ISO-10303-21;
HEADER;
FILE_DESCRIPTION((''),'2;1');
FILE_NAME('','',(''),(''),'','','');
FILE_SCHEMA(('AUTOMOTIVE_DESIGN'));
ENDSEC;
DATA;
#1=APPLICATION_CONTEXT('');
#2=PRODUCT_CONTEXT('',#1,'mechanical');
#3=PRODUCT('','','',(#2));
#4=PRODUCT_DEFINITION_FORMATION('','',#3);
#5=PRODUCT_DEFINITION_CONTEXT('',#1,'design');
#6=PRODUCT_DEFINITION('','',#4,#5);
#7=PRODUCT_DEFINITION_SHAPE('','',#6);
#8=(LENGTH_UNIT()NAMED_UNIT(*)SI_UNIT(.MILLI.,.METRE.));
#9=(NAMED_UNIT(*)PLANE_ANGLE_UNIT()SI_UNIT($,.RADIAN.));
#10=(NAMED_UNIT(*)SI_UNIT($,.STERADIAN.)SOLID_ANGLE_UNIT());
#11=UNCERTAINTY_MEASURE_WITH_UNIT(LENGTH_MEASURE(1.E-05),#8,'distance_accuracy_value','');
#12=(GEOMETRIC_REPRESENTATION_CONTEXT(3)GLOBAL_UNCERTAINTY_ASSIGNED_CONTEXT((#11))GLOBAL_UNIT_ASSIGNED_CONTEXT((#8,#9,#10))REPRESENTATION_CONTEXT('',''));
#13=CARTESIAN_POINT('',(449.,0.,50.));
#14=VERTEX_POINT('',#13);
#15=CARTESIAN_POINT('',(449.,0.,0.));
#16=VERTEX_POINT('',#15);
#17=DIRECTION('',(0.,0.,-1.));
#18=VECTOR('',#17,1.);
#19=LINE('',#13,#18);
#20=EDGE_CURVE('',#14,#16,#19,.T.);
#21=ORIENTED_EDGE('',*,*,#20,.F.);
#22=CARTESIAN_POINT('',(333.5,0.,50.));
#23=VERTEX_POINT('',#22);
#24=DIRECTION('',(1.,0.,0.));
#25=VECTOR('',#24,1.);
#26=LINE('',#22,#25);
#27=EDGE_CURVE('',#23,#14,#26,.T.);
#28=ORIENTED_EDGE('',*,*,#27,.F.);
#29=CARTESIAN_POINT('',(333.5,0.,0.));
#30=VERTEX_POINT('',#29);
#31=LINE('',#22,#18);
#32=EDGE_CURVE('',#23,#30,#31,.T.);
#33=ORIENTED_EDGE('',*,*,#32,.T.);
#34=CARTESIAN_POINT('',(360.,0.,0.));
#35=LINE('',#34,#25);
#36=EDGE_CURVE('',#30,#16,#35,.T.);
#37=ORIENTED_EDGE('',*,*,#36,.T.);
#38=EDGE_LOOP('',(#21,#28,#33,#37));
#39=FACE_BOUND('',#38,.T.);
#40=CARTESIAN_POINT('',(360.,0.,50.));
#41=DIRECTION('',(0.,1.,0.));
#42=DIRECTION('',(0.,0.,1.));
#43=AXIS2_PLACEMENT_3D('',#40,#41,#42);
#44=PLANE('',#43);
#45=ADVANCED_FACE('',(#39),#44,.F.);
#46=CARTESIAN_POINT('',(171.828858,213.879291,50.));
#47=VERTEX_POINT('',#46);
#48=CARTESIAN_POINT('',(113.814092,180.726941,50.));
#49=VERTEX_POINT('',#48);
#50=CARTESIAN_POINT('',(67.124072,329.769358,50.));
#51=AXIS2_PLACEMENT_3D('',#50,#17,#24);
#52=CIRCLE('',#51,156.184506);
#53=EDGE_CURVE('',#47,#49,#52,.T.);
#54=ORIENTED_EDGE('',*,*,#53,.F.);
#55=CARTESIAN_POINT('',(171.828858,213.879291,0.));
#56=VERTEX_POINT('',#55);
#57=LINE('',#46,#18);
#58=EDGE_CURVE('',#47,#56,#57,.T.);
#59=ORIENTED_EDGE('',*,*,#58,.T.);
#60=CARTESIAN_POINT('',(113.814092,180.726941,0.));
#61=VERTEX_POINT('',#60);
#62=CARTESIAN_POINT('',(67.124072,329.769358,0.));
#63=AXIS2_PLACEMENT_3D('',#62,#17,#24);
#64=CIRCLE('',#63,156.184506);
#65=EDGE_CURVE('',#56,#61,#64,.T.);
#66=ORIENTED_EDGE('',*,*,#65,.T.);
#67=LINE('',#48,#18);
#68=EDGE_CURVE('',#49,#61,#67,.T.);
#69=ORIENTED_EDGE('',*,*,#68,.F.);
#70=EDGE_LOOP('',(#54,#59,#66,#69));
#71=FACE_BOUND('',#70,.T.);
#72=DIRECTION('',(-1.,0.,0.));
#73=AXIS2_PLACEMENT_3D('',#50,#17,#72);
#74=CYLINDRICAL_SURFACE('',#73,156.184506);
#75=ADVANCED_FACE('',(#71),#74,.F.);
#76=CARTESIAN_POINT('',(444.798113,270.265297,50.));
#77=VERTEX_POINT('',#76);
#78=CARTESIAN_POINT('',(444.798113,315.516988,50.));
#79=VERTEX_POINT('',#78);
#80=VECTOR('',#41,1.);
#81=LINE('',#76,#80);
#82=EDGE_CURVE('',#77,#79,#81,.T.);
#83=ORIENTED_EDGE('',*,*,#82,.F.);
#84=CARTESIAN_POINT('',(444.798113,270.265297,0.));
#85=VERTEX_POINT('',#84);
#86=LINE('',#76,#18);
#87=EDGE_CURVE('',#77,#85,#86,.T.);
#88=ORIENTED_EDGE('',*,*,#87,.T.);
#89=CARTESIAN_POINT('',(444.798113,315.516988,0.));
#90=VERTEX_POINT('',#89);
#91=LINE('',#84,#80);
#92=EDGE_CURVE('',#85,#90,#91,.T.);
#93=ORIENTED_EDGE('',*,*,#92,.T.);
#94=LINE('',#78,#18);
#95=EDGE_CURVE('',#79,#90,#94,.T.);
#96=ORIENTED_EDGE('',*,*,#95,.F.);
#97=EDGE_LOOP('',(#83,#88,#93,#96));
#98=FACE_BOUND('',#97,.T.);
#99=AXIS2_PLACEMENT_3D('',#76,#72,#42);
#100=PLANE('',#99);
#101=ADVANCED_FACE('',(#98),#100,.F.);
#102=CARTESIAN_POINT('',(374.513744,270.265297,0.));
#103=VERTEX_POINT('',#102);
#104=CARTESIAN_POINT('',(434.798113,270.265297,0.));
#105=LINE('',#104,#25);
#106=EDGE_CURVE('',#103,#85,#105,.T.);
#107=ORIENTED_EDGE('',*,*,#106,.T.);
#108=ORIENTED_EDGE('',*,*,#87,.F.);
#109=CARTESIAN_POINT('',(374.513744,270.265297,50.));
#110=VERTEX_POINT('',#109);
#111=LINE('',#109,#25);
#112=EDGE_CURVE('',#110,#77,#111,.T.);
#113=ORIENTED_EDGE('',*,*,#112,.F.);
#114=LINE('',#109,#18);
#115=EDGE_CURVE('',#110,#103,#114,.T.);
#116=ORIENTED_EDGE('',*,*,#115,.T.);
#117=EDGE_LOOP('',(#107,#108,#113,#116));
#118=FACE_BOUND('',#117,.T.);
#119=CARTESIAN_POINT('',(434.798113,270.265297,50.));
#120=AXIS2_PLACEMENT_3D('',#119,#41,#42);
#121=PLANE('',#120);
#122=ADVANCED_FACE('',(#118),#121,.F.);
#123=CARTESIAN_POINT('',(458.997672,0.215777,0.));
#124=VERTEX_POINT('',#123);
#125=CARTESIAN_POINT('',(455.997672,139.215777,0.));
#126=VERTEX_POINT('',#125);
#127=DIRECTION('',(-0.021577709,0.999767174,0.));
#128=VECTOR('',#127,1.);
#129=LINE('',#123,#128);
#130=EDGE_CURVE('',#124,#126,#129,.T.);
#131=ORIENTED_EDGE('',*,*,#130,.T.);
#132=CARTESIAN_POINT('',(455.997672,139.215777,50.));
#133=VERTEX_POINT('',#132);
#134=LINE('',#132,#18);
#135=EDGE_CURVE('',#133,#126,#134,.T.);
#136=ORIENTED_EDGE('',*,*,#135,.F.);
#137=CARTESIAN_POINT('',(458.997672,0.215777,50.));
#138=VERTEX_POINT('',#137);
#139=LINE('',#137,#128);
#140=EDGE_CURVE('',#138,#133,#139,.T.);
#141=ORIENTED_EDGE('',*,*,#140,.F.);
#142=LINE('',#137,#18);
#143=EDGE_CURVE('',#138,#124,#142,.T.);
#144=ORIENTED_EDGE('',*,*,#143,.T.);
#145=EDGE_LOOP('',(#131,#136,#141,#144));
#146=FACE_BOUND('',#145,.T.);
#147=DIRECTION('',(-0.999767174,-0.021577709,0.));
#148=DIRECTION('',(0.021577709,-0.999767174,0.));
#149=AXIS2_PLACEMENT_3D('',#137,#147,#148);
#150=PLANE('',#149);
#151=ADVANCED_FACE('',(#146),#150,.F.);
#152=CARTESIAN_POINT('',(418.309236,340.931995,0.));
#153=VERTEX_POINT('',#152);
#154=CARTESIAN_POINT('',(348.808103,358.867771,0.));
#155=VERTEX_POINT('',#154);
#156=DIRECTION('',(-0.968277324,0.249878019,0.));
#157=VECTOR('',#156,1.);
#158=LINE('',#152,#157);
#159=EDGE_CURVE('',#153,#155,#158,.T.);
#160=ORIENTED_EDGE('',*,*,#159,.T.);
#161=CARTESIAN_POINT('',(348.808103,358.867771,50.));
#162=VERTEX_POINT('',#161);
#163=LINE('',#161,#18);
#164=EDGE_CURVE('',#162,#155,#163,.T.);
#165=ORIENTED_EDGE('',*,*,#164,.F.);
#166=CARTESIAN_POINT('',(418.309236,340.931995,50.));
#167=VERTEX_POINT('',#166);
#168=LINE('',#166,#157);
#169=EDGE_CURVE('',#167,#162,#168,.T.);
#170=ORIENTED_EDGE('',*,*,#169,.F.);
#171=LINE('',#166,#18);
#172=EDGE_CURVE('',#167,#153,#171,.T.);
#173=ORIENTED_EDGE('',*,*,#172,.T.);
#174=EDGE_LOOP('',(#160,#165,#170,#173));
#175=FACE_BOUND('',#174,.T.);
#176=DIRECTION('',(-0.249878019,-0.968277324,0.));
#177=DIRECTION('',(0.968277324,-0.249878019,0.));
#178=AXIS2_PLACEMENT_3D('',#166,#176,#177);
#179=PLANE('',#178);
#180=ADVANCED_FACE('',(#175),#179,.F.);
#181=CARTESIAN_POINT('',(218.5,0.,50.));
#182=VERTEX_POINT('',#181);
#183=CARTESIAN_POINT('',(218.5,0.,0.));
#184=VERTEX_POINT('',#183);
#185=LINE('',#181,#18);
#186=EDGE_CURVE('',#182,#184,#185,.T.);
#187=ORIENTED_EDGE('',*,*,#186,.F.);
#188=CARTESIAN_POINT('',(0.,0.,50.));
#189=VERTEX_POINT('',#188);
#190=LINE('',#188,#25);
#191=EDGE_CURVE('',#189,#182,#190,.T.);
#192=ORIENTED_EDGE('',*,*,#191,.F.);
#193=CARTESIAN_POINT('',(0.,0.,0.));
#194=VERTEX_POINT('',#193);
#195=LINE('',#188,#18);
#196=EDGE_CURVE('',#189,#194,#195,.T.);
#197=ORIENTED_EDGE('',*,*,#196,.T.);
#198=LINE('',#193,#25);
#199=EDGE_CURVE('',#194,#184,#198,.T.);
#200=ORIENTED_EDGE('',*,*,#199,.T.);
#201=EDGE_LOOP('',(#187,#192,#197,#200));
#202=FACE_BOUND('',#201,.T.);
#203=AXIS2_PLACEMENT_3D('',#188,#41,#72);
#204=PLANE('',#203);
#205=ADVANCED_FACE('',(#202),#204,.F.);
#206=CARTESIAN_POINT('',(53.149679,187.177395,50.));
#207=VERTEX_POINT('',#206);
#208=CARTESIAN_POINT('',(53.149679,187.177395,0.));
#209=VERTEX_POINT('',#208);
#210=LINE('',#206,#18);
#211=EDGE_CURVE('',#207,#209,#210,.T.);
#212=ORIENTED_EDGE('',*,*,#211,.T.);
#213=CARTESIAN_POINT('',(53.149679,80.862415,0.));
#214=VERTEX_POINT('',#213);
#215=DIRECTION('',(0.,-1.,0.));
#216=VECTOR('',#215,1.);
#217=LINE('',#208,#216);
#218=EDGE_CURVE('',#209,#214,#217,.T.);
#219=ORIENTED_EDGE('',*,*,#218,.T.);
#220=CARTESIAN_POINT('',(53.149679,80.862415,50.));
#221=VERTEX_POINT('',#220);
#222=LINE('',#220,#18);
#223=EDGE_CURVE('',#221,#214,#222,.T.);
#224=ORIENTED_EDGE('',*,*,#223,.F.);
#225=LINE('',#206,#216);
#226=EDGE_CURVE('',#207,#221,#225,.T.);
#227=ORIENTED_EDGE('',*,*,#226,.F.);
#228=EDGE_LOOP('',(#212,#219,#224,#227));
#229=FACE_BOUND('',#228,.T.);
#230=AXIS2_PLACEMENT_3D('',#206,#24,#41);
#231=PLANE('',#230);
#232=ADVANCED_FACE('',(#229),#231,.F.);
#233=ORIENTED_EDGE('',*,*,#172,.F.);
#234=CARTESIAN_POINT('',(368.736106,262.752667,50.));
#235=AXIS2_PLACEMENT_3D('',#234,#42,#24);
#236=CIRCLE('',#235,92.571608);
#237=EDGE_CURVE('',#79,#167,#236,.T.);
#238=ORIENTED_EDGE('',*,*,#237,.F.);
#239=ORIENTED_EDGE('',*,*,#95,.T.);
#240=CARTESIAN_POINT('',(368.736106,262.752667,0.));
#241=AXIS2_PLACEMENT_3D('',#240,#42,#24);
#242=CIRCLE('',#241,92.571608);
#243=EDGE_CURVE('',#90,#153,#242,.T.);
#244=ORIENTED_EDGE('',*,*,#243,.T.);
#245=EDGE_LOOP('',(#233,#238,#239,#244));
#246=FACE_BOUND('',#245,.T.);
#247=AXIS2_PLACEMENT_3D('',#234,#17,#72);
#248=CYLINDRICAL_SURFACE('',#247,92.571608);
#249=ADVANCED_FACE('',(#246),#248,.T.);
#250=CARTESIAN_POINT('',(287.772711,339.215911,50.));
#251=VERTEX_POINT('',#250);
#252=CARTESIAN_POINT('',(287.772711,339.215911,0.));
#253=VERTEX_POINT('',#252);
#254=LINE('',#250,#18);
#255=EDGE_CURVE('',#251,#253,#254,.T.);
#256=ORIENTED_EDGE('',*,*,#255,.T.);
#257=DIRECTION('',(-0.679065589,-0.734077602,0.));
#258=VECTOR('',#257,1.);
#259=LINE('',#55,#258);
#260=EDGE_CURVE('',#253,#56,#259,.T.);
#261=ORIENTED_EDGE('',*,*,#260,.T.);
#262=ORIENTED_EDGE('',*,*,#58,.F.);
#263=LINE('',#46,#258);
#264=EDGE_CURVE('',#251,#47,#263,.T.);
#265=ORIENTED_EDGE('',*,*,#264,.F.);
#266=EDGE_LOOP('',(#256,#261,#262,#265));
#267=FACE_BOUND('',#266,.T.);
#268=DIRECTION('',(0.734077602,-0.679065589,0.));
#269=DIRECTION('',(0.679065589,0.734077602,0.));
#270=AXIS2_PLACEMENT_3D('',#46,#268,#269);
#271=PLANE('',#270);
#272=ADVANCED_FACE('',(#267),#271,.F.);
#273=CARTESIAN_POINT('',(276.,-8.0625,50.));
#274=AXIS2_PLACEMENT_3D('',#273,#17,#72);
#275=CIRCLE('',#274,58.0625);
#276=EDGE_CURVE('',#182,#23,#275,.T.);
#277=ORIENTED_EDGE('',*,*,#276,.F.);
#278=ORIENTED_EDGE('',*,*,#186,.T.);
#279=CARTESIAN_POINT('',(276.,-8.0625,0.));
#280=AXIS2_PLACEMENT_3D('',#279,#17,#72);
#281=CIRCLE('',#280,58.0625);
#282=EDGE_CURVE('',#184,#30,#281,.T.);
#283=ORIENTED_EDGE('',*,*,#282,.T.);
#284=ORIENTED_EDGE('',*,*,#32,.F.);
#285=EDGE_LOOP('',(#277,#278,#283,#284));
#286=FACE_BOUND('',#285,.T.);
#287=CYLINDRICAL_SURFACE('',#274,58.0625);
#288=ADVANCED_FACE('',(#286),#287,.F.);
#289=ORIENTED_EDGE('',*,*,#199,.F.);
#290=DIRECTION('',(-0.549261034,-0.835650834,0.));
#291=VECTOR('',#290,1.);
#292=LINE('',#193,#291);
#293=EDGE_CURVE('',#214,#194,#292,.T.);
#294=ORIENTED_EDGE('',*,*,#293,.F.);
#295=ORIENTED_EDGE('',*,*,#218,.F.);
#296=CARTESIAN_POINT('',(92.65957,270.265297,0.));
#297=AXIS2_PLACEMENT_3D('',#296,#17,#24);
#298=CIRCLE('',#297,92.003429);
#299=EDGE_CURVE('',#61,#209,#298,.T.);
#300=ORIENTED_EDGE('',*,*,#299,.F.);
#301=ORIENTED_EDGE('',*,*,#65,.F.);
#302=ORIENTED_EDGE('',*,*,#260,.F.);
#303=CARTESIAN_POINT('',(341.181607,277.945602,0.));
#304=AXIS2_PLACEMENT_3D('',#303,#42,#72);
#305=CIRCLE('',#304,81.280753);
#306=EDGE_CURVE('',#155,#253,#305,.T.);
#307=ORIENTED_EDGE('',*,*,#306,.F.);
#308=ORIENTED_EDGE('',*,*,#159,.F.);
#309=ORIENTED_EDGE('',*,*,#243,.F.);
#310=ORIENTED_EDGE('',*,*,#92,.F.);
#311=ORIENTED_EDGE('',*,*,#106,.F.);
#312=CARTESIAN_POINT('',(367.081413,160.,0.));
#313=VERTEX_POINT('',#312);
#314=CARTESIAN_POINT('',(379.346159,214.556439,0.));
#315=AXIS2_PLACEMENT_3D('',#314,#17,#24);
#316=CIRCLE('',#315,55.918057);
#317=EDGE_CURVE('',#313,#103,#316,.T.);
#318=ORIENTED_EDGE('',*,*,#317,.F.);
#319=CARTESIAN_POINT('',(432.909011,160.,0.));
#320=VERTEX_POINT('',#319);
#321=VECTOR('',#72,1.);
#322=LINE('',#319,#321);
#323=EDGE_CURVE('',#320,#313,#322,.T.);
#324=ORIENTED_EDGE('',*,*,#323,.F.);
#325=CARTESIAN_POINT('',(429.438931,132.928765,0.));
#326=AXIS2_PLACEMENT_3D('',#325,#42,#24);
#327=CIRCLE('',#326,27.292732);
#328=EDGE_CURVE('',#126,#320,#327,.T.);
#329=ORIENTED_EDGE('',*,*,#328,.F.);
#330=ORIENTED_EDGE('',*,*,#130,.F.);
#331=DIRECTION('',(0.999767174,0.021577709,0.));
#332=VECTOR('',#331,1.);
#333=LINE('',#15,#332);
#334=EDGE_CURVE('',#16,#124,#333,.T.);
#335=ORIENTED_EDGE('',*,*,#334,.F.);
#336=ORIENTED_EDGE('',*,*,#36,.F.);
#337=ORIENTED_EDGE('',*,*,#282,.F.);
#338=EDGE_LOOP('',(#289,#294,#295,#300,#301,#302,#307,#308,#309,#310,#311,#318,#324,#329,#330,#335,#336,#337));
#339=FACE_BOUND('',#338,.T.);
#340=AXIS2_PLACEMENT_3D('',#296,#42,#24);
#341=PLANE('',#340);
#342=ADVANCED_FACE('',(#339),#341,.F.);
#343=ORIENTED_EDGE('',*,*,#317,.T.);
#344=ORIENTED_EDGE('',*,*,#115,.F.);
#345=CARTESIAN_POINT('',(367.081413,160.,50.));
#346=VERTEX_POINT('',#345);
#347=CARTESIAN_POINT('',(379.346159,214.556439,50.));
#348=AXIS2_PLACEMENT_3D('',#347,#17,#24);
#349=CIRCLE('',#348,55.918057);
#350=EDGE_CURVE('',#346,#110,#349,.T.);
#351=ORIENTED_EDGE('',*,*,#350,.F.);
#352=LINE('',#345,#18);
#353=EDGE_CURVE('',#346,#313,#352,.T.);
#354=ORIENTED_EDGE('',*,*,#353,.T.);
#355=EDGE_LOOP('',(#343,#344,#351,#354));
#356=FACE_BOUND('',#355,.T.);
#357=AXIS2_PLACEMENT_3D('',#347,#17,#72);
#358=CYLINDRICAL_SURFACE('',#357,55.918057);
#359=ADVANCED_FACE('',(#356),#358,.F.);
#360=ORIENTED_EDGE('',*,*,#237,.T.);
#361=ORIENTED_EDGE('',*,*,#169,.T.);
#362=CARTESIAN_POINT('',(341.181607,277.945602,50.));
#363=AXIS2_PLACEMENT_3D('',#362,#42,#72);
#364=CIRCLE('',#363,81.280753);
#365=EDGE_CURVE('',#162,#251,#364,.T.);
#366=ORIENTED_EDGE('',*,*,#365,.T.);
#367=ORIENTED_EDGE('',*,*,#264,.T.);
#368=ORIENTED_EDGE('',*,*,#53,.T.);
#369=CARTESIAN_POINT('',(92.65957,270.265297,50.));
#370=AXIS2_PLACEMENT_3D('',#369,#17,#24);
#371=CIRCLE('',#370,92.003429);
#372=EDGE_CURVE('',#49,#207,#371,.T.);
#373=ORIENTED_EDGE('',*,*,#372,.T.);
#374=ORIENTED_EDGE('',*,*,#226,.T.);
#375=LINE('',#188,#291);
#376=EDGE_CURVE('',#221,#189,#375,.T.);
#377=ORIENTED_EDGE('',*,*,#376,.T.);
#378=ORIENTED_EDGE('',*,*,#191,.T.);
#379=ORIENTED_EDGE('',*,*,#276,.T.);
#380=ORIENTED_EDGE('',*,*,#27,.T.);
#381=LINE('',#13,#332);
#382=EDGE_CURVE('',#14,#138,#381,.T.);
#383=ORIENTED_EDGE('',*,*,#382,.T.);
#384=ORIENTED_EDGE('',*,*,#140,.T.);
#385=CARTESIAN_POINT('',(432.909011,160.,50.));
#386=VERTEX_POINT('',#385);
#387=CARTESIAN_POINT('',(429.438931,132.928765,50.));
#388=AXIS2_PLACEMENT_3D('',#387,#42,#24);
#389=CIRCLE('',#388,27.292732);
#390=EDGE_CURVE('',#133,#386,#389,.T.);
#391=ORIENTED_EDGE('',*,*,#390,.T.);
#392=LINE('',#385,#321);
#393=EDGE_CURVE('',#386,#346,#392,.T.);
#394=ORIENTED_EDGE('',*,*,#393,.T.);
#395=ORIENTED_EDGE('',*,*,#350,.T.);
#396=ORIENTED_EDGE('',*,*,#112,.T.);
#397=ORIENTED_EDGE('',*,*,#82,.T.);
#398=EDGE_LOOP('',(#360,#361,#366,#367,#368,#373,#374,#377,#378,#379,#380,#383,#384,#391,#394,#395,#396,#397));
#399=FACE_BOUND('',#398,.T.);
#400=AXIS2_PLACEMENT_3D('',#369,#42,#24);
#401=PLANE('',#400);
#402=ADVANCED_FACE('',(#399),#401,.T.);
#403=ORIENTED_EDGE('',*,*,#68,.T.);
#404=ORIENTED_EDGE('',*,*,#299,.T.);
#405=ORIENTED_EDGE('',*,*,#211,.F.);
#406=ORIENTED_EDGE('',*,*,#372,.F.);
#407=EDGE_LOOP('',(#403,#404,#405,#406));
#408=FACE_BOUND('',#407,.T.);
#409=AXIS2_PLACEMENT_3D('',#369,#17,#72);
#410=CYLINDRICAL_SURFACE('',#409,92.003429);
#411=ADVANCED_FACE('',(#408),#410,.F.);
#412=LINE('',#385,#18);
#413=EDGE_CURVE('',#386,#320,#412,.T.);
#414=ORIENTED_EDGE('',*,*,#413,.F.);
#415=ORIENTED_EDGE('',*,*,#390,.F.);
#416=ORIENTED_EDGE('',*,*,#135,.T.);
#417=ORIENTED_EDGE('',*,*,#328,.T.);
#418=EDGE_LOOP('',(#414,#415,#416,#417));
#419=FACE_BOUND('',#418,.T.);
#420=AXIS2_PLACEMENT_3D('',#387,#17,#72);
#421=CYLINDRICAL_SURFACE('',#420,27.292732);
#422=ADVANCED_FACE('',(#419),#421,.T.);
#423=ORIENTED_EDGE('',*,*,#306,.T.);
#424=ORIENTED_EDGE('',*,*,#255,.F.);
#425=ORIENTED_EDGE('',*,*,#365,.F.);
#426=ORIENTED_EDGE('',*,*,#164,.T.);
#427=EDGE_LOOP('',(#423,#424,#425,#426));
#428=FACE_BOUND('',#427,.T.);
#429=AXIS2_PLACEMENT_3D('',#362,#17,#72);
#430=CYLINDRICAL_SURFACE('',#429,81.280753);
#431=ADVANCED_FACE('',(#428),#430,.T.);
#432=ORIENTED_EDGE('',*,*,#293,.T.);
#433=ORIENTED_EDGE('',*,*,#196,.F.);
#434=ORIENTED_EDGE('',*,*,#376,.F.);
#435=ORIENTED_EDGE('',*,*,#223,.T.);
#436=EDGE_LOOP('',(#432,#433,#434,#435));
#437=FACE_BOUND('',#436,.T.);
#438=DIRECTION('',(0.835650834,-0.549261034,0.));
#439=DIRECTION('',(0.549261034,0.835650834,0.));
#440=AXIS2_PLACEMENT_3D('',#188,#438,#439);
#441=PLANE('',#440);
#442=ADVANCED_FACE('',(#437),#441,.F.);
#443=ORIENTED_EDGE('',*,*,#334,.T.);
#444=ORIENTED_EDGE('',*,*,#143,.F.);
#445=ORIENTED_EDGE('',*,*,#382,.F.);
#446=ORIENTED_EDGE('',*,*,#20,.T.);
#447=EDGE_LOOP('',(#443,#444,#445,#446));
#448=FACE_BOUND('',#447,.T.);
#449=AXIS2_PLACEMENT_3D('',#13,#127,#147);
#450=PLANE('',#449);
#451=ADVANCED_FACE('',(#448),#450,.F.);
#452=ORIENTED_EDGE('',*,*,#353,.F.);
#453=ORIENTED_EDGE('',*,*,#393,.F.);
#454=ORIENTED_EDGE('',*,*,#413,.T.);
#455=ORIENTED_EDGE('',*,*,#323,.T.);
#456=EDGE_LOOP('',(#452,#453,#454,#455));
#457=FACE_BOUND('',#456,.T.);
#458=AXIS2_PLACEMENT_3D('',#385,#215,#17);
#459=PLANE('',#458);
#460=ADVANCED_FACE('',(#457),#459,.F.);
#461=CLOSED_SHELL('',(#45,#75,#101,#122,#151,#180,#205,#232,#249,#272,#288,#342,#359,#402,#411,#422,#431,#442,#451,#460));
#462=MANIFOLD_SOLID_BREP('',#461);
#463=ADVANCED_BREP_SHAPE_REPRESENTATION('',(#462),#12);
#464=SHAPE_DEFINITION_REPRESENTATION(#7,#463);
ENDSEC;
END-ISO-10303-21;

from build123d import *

# Parameters (mm, degrees)
TABAN_FLAN_1_DEPTH = 50


# Sheet-metal steps are written as plain solids
with BuildPart() as part:
    # Çizim1 → Taban-Flanş1 (new body)
    with BuildSketch(Plane.XY):
        with BuildLine():
            Line((0, 0), (218.5, 0))
            ThreePointArc((218.5, 0), (276, 50), (333.5, 0))
            Line((333.5, 0), (360, 0))
            Line((360, 0), (449, 0))
            Line((449, 0), (458.997671741, 0.215777088))
            Line((458.997671741, 0.215777088), (455.997671741, 139.215777088))
            ThreePointArc((455.997671741, 139.215777088), (447.698955646, 153.213358252), (432.909011054, 160))
            Line((432.909011054, 160), (367.081412811, 160))
            ThreePointArc((367.081412811, 160), (323.554697394, 218.317011668), (374.513743955, 270.265297284))
            Line((374.513743955, 270.265297284), (434.798113421, 270.265297284))
            Line((434.798113421, 270.265297284), (444.798113421, 270.265297284))
            Line((444.798113421, 270.265297284), (444.798113421, 315.516988045))
            ThreePointArc((444.798113421, 315.516988045), (432.826102146, 329.550683033), (418.309236409, 340.931994828))
            Line((418.309236409, 340.931994828), (348.808103312, 358.867771111))
            ThreePointArc((348.808103312, 358.867771111), (316.270646866, 355.31487857), (287.772711056, 339.215910531))
            Line((287.772711056, 339.215910531), (171.828858079, 213.879290682))
            ThreePointArc((171.828858079, 213.879290682), (144.61514494, 194.164293468), (113.814091907, 180.726941422))
            ThreePointArc((113.814091907, 180.726941422), (82.931673061, 178.777598724), (53.149679292, 187.177395023))
            Line((53.149679292, 187.177395023), (53.149679292, 80.862415296))
            Line((53.149679292, 80.862415296), (0, 0))
        make_face()
    extrude(amount=TABAN_FLAN_1_DEPTH)


solid = part.part
